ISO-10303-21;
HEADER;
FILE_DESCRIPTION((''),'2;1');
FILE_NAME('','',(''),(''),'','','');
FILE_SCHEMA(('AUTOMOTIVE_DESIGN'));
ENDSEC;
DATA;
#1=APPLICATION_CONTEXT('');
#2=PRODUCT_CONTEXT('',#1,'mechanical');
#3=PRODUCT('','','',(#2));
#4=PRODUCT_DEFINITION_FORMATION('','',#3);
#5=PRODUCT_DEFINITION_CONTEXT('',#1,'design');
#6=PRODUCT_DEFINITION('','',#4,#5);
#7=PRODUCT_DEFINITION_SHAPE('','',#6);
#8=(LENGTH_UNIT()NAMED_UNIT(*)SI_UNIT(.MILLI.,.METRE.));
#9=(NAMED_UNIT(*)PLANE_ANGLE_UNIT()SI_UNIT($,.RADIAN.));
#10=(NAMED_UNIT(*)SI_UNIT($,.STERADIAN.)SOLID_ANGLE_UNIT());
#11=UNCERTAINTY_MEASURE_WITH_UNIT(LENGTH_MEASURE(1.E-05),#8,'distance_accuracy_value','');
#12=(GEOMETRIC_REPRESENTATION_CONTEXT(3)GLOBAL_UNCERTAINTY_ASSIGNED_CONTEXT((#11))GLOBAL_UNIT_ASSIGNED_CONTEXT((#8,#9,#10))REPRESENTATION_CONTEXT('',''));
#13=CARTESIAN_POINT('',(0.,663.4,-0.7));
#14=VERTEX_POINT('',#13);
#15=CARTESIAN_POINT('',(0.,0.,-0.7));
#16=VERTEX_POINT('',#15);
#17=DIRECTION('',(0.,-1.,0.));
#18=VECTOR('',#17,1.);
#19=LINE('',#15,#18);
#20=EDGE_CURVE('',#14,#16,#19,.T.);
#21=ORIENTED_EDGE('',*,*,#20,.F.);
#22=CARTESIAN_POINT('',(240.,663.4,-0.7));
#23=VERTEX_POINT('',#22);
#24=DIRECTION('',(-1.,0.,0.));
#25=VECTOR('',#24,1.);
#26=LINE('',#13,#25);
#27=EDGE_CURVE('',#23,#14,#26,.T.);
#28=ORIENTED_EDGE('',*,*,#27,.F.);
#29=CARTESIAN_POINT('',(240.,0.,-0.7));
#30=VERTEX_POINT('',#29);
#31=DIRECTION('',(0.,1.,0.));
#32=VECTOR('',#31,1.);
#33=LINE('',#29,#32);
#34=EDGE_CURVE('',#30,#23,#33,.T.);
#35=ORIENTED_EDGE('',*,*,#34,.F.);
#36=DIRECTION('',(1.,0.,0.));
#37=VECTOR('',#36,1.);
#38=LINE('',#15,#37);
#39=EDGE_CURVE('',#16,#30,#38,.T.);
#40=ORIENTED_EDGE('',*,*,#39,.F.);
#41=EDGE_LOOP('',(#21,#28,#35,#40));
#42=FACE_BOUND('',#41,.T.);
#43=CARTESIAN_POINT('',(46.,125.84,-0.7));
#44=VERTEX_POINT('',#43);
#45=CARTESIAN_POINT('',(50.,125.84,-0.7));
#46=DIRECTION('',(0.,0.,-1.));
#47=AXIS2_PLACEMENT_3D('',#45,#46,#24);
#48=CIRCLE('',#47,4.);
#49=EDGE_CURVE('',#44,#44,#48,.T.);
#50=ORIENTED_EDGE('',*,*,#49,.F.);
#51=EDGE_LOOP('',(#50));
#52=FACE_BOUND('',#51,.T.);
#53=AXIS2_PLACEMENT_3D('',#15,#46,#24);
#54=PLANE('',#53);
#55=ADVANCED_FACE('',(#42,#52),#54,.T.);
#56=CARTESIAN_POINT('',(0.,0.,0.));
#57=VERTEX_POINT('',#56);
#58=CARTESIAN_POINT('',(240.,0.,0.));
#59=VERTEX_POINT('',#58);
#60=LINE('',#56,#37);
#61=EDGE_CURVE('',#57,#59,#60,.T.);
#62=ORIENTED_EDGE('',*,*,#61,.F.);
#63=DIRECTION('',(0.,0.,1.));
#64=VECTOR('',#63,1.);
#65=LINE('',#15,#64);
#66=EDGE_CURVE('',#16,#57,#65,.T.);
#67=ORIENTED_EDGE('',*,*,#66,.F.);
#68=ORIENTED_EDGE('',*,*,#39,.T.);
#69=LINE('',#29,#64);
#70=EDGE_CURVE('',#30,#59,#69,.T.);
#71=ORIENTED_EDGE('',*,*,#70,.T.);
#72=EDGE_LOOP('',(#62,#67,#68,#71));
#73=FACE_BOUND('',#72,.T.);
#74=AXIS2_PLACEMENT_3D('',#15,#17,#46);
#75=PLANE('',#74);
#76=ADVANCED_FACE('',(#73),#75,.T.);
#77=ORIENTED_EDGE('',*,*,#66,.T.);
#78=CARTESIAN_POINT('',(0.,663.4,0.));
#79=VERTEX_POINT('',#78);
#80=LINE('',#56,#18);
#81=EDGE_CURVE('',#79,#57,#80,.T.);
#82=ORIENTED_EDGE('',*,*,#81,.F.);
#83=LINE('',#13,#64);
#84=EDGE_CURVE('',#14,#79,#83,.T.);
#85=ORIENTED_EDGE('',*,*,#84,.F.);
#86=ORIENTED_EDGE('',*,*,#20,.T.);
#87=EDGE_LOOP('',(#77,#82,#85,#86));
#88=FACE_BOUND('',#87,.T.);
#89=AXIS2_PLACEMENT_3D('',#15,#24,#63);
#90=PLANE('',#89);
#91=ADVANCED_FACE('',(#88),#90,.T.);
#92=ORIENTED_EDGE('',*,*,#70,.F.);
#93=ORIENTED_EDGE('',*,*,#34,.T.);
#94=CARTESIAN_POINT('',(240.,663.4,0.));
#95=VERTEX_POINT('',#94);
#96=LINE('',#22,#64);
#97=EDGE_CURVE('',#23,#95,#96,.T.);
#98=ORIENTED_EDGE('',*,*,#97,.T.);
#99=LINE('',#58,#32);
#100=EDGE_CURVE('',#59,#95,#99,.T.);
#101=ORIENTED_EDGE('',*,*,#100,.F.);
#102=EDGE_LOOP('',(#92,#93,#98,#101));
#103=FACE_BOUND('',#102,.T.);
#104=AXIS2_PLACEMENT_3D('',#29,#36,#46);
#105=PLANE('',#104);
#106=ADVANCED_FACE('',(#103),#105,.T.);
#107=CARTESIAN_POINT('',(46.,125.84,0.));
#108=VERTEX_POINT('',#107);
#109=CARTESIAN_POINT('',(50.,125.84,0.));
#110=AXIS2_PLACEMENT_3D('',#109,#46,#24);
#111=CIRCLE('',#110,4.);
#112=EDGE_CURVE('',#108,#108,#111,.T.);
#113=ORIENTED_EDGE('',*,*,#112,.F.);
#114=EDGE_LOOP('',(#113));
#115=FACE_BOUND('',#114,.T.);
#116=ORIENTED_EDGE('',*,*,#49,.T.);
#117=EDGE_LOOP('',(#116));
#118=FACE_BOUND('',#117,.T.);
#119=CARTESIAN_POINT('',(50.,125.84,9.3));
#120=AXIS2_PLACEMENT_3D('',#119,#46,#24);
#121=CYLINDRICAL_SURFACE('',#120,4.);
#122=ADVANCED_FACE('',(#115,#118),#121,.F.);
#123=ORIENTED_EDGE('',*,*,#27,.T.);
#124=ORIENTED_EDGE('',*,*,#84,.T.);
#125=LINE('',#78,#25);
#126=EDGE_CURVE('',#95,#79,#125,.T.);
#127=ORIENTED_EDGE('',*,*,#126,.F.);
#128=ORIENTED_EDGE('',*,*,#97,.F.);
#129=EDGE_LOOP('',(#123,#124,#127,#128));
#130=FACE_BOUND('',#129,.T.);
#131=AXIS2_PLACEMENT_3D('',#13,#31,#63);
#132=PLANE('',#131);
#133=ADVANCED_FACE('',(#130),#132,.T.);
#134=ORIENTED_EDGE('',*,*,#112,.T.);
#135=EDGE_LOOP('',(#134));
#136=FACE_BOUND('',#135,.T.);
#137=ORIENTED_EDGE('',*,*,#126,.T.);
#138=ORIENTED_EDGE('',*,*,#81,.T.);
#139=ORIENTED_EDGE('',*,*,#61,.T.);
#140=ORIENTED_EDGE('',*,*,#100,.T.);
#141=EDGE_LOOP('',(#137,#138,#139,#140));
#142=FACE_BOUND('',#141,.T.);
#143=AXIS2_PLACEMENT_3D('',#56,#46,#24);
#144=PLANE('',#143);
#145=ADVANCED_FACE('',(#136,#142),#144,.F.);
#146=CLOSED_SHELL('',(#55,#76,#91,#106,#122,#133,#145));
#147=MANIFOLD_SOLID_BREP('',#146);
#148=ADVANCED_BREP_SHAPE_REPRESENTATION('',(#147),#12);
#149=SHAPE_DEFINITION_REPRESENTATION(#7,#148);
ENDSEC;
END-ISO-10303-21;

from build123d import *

# Parameters (mm, degrees)
SKETCH1_W          = 240
SKETCH1_H          = 663.4
BASE_FLANGE1_DEPTH = 0.7
SKETCH2_R          = 4
CUT_EXTRUDE1_DEPTH = 10


# Sheet-metal steps are written as plain solids
with BuildPart() as part:
    # Sketch1 → Base-Flange1 (new body)
    with BuildSketch(Plane.XY):
        with Locations((120, 331.7)):
            Rectangle(SKETCH1_W, SKETCH1_H)
    extrude(amount=-BASE_FLANGE1_DEPTH)

    # Sketch2 → Cut-Extrude1 (cut)
    with BuildSketch(Plane(origin=(0, 0, -0.7), x_dir=(-1, 0, 0), z_dir=(0, 0, -1))):
        with Locations((-50, 125.84)):
            Circle(SKETCH2_R)
    extrude(amount=-CUT_EXTRUDE1_DEPTH, mode=Mode.SUBTRACT)


solid = part.part
